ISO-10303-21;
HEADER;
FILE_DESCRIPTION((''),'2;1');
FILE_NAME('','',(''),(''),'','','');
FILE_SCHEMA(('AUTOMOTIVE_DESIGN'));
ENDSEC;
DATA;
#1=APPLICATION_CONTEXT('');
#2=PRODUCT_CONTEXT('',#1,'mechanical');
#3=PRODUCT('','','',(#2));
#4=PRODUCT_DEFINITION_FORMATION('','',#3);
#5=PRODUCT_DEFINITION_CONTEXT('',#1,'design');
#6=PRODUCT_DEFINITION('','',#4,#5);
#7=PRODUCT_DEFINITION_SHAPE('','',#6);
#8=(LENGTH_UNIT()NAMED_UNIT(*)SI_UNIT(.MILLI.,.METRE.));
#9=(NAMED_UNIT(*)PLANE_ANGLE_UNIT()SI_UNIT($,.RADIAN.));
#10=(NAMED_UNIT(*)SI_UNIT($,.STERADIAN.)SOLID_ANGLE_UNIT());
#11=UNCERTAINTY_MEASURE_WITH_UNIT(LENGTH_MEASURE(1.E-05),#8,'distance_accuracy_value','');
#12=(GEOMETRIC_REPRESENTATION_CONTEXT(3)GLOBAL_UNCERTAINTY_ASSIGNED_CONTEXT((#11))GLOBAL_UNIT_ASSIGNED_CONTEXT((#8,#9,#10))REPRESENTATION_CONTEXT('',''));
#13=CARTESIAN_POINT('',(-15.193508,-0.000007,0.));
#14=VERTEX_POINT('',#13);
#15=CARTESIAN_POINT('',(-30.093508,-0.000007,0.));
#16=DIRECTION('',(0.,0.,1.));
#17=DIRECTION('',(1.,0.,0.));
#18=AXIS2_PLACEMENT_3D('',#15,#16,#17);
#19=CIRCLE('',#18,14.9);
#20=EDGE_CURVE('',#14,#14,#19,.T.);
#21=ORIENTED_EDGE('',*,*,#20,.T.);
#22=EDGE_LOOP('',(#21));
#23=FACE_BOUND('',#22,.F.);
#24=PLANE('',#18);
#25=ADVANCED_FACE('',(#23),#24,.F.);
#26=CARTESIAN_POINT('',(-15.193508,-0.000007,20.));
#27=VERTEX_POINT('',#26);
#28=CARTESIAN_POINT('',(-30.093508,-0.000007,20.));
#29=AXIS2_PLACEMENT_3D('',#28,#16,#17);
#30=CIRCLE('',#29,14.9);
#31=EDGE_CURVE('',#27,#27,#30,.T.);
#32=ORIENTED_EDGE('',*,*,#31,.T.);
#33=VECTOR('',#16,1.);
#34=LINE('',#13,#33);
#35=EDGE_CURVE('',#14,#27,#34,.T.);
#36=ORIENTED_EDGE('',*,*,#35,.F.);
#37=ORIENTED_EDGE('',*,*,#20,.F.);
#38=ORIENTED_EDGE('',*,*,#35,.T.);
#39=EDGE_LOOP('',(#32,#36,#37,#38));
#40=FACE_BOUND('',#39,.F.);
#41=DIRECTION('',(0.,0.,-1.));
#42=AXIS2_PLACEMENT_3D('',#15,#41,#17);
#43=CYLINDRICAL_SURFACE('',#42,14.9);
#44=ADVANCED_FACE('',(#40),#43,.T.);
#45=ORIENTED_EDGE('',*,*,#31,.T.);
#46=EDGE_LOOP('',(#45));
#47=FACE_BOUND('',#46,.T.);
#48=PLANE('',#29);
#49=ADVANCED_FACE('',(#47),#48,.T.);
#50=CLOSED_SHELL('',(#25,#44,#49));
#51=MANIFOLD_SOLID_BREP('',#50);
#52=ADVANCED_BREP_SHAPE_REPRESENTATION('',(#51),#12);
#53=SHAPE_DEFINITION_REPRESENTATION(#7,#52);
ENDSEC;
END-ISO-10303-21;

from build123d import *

# Parameters (mm, degrees)
F3_R     = 14.9
F5_DEPTH = 20


# Not quite as in the source:
# - the program builds the solid bodies; features that only make, move or delete a surface that nothing else refers to are left out


with BuildPart() as f5:
    # F3 (on Top) → F5 (new body)
    with BuildSketch(Plane.XY):
        with Locations((-30.0935078294, -6.574e-06)):
            Circle(F3_R)
    extrude(amount=F5_DEPTH)


solid = f5.part
